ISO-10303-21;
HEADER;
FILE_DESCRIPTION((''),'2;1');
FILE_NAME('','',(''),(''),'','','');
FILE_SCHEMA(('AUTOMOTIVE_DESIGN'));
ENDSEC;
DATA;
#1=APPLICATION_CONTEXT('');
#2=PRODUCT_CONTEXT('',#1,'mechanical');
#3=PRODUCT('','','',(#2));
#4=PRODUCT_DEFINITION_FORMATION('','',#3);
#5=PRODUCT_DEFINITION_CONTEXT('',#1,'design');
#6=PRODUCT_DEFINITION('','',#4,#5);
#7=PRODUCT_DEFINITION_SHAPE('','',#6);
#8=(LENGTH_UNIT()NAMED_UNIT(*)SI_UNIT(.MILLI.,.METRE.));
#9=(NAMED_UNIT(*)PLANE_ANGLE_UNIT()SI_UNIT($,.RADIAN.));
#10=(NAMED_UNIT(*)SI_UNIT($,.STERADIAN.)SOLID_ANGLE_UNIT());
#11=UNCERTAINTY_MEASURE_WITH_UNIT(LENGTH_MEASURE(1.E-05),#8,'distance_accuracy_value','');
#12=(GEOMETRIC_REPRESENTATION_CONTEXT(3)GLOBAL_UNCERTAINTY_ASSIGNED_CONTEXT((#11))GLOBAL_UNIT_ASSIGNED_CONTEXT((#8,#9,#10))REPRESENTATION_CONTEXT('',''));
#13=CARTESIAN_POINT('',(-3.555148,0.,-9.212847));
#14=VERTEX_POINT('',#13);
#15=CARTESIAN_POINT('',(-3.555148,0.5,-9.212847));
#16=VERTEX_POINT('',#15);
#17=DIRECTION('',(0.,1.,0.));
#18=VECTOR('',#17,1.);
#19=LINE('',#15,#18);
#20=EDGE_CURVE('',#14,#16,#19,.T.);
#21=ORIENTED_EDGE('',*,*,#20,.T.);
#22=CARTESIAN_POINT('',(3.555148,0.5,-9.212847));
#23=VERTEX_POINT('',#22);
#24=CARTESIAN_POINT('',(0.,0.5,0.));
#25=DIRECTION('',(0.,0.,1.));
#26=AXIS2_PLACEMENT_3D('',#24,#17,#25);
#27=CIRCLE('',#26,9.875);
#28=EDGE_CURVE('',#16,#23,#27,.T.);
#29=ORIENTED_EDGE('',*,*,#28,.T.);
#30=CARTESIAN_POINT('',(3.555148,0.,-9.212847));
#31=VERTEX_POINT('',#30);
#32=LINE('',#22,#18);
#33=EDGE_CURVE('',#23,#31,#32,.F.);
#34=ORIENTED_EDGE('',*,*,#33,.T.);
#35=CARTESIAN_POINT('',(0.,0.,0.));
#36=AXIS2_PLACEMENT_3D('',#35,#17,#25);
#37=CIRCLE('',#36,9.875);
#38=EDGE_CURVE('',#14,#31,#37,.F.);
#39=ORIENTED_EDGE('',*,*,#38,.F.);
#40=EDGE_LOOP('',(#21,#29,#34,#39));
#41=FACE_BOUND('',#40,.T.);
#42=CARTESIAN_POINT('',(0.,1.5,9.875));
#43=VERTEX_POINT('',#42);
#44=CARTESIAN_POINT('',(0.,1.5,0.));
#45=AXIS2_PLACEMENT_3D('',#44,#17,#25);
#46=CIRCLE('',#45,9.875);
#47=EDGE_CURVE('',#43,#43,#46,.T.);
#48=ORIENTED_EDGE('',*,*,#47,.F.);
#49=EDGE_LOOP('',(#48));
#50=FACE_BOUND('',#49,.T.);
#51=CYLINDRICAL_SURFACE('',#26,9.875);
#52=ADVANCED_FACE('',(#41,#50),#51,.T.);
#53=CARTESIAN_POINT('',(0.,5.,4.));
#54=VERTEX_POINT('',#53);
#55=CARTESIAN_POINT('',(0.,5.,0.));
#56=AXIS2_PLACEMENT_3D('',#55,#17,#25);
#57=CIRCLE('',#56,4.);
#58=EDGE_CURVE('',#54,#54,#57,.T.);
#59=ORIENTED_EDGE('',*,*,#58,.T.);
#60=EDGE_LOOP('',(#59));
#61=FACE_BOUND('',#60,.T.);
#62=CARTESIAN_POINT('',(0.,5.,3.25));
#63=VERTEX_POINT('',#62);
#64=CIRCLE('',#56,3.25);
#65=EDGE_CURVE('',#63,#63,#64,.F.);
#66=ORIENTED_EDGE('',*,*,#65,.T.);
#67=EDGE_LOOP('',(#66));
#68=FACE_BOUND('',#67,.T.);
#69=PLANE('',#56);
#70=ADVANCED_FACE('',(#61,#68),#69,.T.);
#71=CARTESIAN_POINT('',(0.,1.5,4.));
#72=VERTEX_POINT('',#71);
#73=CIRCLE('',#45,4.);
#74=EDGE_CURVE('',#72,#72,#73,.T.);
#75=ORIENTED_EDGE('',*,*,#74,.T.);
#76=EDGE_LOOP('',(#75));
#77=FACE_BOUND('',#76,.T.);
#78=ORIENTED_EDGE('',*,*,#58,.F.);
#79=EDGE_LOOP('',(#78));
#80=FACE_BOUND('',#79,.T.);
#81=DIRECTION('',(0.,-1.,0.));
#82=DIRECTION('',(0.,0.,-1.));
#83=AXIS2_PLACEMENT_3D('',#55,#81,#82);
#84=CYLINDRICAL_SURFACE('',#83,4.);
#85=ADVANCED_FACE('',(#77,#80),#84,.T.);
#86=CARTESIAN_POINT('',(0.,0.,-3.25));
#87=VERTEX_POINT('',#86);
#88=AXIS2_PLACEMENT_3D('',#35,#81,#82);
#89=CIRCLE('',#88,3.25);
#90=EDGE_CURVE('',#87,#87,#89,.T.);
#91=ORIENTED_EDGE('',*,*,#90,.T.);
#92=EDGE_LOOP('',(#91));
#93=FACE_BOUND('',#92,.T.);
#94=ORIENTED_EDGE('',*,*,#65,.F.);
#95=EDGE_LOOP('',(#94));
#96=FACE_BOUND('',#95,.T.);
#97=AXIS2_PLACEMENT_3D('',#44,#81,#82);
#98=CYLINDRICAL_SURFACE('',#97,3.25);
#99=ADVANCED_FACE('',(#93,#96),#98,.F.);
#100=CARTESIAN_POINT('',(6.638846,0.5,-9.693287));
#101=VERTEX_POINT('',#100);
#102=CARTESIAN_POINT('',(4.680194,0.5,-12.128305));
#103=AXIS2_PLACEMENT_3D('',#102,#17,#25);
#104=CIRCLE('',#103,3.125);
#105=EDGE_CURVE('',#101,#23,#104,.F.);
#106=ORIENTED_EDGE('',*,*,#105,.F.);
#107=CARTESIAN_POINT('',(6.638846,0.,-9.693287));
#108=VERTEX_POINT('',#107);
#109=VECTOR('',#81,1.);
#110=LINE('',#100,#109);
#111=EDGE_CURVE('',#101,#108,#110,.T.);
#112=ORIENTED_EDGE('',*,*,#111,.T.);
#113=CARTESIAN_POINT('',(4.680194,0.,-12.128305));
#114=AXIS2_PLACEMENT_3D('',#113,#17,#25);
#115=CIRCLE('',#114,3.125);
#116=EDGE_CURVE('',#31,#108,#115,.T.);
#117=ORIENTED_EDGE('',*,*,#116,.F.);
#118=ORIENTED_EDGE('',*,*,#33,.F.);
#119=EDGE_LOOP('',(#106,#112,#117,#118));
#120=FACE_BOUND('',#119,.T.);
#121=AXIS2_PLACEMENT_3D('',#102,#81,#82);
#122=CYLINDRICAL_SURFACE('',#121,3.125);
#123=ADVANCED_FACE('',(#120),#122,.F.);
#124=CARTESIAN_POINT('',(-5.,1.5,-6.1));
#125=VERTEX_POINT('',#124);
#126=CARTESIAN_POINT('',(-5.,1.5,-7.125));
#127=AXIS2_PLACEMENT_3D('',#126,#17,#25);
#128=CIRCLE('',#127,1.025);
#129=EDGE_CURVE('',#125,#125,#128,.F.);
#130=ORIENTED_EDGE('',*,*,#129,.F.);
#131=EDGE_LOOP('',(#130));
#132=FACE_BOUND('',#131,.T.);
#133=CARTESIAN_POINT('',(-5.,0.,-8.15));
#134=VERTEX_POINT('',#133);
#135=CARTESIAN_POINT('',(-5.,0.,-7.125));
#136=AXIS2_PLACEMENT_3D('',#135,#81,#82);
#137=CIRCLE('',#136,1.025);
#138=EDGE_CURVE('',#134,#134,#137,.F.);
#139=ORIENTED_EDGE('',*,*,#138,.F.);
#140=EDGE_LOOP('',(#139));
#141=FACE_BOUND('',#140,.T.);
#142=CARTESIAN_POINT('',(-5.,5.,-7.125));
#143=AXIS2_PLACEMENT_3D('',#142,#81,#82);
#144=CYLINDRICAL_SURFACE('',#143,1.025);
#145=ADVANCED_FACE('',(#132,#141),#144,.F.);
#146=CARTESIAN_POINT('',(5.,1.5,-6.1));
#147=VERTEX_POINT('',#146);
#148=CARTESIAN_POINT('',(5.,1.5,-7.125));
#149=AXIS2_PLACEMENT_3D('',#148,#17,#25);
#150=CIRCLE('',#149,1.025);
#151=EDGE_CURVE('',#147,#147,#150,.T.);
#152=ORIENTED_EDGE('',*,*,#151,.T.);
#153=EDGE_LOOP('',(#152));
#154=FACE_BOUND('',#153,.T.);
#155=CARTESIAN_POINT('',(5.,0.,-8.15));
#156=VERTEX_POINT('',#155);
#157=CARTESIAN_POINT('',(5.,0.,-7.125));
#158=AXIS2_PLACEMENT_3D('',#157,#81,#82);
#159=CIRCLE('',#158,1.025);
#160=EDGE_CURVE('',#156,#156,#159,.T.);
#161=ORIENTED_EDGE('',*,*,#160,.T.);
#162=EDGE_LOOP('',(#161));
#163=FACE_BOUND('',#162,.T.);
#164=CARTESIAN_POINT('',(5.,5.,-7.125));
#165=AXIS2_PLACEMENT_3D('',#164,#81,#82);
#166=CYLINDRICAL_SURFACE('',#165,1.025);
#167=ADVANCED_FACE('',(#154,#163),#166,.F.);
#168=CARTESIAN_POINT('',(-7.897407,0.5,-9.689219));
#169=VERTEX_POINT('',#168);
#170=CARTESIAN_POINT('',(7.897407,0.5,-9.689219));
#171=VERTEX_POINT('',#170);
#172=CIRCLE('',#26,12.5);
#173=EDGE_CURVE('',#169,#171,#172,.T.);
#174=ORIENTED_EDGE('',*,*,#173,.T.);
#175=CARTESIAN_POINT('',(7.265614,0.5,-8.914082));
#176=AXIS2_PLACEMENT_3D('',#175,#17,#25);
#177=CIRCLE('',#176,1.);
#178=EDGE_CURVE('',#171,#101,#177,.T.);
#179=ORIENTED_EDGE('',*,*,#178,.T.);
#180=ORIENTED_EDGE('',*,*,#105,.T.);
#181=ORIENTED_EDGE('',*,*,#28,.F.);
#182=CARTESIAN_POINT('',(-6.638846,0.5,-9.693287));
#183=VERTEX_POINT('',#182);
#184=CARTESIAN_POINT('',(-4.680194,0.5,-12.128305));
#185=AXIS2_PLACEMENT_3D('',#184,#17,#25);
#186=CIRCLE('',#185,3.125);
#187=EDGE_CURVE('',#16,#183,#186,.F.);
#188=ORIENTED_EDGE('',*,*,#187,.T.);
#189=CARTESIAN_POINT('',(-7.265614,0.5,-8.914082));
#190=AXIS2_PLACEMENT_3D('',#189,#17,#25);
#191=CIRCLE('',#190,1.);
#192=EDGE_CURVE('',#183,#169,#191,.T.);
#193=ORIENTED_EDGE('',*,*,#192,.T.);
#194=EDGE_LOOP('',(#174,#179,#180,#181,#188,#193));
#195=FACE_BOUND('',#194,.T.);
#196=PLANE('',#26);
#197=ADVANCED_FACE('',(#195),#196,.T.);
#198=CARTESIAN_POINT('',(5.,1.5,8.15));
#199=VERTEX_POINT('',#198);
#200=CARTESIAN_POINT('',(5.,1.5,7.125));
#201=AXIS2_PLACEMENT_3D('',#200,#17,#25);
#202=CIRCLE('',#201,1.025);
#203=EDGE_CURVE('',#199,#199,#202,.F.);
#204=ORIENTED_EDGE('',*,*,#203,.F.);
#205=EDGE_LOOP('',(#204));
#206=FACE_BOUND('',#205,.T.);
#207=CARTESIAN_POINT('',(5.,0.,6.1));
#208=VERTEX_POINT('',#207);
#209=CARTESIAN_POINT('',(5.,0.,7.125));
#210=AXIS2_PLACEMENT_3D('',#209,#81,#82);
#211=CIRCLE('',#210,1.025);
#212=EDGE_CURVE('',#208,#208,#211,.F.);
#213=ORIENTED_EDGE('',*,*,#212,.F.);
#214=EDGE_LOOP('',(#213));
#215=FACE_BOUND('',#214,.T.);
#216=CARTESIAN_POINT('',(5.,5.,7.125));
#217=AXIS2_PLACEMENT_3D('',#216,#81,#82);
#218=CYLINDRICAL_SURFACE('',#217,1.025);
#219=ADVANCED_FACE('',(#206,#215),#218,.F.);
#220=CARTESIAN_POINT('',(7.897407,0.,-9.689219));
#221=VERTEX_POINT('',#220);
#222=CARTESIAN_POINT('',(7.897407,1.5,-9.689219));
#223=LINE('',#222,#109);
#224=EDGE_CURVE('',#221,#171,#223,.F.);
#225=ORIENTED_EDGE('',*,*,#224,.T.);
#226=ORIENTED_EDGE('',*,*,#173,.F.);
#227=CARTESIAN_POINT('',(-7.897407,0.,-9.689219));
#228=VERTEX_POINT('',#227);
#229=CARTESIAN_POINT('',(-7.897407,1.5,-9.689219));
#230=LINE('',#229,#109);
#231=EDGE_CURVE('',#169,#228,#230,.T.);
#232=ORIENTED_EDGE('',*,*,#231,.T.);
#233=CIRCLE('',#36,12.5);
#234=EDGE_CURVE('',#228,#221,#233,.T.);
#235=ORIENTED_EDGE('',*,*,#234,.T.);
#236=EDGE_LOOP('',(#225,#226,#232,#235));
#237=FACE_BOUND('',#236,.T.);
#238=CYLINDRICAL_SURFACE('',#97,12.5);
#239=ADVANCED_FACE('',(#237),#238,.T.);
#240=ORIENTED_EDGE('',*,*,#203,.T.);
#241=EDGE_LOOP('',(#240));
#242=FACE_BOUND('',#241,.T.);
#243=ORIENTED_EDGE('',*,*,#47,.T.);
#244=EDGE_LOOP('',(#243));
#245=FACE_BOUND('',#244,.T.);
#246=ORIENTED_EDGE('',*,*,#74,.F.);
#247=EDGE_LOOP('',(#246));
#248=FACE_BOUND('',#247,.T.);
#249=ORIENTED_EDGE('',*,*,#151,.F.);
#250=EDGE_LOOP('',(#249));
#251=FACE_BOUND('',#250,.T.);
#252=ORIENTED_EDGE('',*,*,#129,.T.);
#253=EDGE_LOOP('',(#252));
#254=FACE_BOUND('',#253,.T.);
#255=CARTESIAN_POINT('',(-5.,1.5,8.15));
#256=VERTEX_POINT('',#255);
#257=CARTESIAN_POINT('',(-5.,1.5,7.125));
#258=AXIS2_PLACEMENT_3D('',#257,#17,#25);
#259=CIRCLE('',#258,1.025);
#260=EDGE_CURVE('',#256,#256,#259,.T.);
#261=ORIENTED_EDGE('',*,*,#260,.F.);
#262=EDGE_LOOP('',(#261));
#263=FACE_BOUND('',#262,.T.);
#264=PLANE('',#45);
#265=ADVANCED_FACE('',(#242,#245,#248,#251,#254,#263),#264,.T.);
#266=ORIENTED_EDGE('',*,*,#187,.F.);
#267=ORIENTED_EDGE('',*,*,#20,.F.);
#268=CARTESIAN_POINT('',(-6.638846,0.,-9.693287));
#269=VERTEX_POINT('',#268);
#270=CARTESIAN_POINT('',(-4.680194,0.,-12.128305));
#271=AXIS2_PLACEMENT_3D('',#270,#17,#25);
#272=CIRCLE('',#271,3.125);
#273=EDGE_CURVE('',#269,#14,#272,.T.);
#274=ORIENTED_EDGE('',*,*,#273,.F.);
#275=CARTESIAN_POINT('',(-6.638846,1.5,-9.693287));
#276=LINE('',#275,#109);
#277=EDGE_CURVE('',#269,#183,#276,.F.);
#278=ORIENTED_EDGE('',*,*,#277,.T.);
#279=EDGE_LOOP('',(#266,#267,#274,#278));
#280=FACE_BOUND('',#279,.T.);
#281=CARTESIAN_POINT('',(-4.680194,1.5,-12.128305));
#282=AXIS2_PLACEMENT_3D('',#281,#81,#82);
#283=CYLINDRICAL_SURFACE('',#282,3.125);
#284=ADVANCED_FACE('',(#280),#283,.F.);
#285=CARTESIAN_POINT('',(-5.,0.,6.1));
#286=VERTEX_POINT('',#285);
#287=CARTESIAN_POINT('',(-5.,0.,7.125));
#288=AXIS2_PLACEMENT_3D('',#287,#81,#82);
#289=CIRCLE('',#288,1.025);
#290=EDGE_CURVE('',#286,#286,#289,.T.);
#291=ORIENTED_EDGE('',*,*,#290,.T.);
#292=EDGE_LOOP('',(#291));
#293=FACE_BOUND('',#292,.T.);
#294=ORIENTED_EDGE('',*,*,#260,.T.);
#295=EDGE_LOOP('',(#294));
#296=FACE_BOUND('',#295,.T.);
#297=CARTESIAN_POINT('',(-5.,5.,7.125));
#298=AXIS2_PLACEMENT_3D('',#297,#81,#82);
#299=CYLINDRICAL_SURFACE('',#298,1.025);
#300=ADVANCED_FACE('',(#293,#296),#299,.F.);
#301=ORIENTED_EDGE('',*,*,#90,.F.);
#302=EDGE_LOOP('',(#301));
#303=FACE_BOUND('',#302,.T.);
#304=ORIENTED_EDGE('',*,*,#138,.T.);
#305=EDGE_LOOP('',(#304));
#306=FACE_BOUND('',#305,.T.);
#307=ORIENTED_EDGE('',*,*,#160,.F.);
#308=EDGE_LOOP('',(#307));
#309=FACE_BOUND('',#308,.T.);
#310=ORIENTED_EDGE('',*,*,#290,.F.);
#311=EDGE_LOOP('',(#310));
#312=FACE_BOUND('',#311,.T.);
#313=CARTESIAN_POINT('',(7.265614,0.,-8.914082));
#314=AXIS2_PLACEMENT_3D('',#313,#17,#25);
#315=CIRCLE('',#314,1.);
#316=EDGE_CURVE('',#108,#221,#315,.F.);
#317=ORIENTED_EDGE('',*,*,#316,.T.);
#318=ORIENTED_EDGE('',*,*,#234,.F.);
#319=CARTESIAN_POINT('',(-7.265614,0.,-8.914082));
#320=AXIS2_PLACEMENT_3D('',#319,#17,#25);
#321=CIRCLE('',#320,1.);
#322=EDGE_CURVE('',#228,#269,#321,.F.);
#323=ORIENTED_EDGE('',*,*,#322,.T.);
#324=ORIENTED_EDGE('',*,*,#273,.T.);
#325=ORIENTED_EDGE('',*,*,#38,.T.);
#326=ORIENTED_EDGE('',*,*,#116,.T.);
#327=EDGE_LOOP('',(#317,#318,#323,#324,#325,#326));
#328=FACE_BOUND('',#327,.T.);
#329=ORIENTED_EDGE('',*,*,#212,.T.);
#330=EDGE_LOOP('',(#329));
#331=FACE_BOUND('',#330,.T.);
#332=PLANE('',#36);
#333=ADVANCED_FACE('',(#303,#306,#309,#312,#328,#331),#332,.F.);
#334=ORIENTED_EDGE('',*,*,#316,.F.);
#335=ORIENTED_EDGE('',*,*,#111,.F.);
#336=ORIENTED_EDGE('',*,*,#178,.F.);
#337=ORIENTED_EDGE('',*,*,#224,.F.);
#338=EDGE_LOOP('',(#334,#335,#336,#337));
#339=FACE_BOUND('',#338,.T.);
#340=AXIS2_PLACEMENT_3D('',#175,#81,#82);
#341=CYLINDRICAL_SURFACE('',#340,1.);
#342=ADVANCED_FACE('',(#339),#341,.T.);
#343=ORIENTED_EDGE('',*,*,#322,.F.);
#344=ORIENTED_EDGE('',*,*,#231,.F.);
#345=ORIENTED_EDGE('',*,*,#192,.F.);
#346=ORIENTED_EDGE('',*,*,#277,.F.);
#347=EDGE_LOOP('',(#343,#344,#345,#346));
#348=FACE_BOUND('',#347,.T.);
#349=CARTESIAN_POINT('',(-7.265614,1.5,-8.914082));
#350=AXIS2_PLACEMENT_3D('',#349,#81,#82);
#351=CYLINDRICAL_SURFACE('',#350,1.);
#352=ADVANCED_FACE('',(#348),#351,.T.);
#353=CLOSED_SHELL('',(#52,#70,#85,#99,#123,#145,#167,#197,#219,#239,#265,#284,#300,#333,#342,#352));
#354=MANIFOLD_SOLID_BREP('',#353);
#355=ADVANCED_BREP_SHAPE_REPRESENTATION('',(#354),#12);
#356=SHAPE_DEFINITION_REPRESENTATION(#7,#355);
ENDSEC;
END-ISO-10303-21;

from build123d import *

# Parameters (mm, degrees)
SKETCH1_R           = 12.5
BOSS_EXTRUDE1_DEPTH = 1.5
SKETCH2_R           = 3.25
CUT_EXTRUDE1_DEPTH  = 18.741194999
SKETCH3_R           = 4
SKETCH3_R_2         = 3.25
BOSS_EXTRUDE2_DEPTH = 3.5
CUT_EXTRUDE2_START  = -1
SKETCH4_R           = 12.5
SKETCH4_R_2         = 9.875
CUT_EXTRUDE2_DEPTH  = 1
CUT_EXTRUDE3_DEPTH  = 19.241436347
FILLET1_R           = 3.125
FILLET2_R           = 1
SKETCH6_R           = 1.025
CUT_EXTRUDE4_DEPTH  = 19.371173207


with BuildPart() as part:
    # Sketch1 → Boss-Extrude1 (new body)
    with BuildSketch(Plane(origin=(0, 0, 0), x_dir=(1, 0, 0), z_dir=(0, 1, 0))):
        with Locations(Location((0, 0, 0), (0, 0, 270))):
            Circle(SKETCH1_R)
    extrude(amount=BOSS_EXTRUDE1_DEPTH)

    # Sketch2 → Cut-Extrude1 (cut, through all)
    with BuildSketch(Plane.XZ):
        with Locations(Location((0, 0, 0), (0, 0, 270))):
            Circle(SKETCH2_R)
    extrude(amount=-CUT_EXTRUDE1_DEPTH, mode=Mode.SUBTRACT)

    # Sketch3 → Boss-Extrude2 (add)
    with BuildSketch(Plane(origin=(0, 1.5, 0), x_dir=(1, 0, 0), z_dir=(0, 1, 0))):
        with Locations(Location((0, 0, 0), (0, 0, 270))):
            Circle(SKETCH3_R)
        with Locations(Location((0, 0, 0), (0, 0, 90))):
            Circle(SKETCH3_R_2, mode=Mode.SUBTRACT)
    extrude(amount=BOSS_EXTRUDE2_DEPTH)

    # Sketch4 → Cut-Extrude2 (cut)
    with BuildSketch(Plane(origin=(0, 1.5, 0), x_dir=(1, 0, 0), z_dir=(0, 1, 0)).offset(CUT_EXTRUDE2_START)):
        with Locations(Location((0, 0, 0), (0, 0, 270))):
            Circle(SKETCH4_R)
        with Locations(Location((0, 0, 0), (0, 0, 270))):
            Circle(SKETCH4_R_2, mode=Mode.SUBTRACT)
    extrude(amount=CUT_EXTRUDE2_DEPTH, mode=Mode.SUBTRACT)

    # Sketch5 → Cut-Extrude3 (cut, through all)
    with BuildSketch(Plane(origin=(0, 0.5, 0), x_dir=(1, 0, 0), z_dir=(0, 1, 0))):
        with BuildLine():
            ThreePointArc((0, 9.875), (2.96946977, 9.417954889), (5.664067309, 8.089126437))
            Line((5.664067309, 8.089126437), (7.169705454, 10.239400554))
            ThreePointArc((7.169705454, 10.239400554), (3.758822494, 11.921461884), (0, 12.5))
            Line((0, 12.5), (0, 9.875))
        make_face()
        with BuildLine():
            ThreePointArc((-5.664067309, 8.089126437), (-2.96946977, 9.417954889), (0, 9.875))
            Line((0, 9.875), (0, 12.5))
            ThreePointArc((0, 12.5), (-3.758822494, 11.921461884), (-7.169705454, 10.239400554))
            Line((-7.169705454, 10.239400554), (-5.664067309, 8.089126437))
        make_face()
    extrude(amount=-CUT_EXTRUDE3_DEPTH, mode=Mode.SUBTRACT)

    # Fillet1
    # the kernel refuses this fillet: 3.125 mm, written as the material it adds along each edge
    with BuildSketch(Plane(origin=(-5.664067309, 0.5, -8.089126437), x_dir=(-0.5735764363510301, 0, -0.819152044289003), z_dir=(0, -1, 0))) as fillet1_piece_1:
        with BuildLine():
            CenterArc((2.744375, 3.122719105), FILLET1_R, 193.898885593, 73.911882973)
            Line((-0.289128606, 2.372065474), (-0.349798678, 2.357052401))
            ThreePointArc((-0.349798678, 2.357052401), (-0.134589479, 1.187248558), (-0.0625, 0))
            Line((-0.0625, 0), (0, -0.0625))
            ThreePointArc((0, -0.0625), (1.3125, -0.0625), (2.6226125, -0.062454382))
            Line((2.6226125, -0.062454382), (2.625, 0))
        make_face()
    extrude(amount=0.5)
    with BuildSketch(Plane(origin=(5.664067309, 0.5, -8.089126437), x_dir=(-0.8825329923236406, 0, -0.4702504837427398), z_dir=(0, -1, 0))) as fillet1_piece_2:
        with BuildLine():
            CenterArc((2.767725938, 3.102041567), FILLET1_R, 189.13867423, 73.911882973)
            Line((-0.317607894, 2.605714916), (-0.379314571, 2.595788383))
            ThreePointArc((-0.379314571, 2.595788383), (-0.220844779, 1.295295365), (-0.062040831, -0.007562093))
            Line((-0.062040831, -0.007562093), (0.007562093, -0.062040831))
            ThreePointArc((0.007562093, -0.062040831), (1.194810651, 0.010048648), (2.382059209, -0.062040831))
            Line((2.382059209, -0.062040831), (2.389621301, 0))
        make_face()
    extrude(amount=0.5)

    # Fillet2
    fillet2_edges = [part.edges().sort_by_distance(p)[0] for p in [
        (-7.169705454, 0.25, -10.239400554),
        (7.169705454, 0.25, -10.239400554),
    ]]
    fillet(fillet2_edges, radius=FILLET2_R)

    # Sketch6 → Cut-Extrude4 (cut, through all)
    with BuildSketch(Plane.XZ):
        with Locations(Location((-5, 7.125, 0), (0, 0, 270))):
            Circle(SKETCH6_R)
        with Locations(Location((5, 7.125, 0), (0, 0, 270))):
            Circle(SKETCH6_R)
        with Locations(Location((5, -7.125, 0), (0, 0, 270))):
            Circle(SKETCH6_R)
        with Locations(Location((-5, -7.125, 0), (0, 0, 270))):
            Circle(SKETCH6_R)
    extrude(amount=-CUT_EXTRUDE4_DEPTH, mode=Mode.SUBTRACT)


solid = part.part
